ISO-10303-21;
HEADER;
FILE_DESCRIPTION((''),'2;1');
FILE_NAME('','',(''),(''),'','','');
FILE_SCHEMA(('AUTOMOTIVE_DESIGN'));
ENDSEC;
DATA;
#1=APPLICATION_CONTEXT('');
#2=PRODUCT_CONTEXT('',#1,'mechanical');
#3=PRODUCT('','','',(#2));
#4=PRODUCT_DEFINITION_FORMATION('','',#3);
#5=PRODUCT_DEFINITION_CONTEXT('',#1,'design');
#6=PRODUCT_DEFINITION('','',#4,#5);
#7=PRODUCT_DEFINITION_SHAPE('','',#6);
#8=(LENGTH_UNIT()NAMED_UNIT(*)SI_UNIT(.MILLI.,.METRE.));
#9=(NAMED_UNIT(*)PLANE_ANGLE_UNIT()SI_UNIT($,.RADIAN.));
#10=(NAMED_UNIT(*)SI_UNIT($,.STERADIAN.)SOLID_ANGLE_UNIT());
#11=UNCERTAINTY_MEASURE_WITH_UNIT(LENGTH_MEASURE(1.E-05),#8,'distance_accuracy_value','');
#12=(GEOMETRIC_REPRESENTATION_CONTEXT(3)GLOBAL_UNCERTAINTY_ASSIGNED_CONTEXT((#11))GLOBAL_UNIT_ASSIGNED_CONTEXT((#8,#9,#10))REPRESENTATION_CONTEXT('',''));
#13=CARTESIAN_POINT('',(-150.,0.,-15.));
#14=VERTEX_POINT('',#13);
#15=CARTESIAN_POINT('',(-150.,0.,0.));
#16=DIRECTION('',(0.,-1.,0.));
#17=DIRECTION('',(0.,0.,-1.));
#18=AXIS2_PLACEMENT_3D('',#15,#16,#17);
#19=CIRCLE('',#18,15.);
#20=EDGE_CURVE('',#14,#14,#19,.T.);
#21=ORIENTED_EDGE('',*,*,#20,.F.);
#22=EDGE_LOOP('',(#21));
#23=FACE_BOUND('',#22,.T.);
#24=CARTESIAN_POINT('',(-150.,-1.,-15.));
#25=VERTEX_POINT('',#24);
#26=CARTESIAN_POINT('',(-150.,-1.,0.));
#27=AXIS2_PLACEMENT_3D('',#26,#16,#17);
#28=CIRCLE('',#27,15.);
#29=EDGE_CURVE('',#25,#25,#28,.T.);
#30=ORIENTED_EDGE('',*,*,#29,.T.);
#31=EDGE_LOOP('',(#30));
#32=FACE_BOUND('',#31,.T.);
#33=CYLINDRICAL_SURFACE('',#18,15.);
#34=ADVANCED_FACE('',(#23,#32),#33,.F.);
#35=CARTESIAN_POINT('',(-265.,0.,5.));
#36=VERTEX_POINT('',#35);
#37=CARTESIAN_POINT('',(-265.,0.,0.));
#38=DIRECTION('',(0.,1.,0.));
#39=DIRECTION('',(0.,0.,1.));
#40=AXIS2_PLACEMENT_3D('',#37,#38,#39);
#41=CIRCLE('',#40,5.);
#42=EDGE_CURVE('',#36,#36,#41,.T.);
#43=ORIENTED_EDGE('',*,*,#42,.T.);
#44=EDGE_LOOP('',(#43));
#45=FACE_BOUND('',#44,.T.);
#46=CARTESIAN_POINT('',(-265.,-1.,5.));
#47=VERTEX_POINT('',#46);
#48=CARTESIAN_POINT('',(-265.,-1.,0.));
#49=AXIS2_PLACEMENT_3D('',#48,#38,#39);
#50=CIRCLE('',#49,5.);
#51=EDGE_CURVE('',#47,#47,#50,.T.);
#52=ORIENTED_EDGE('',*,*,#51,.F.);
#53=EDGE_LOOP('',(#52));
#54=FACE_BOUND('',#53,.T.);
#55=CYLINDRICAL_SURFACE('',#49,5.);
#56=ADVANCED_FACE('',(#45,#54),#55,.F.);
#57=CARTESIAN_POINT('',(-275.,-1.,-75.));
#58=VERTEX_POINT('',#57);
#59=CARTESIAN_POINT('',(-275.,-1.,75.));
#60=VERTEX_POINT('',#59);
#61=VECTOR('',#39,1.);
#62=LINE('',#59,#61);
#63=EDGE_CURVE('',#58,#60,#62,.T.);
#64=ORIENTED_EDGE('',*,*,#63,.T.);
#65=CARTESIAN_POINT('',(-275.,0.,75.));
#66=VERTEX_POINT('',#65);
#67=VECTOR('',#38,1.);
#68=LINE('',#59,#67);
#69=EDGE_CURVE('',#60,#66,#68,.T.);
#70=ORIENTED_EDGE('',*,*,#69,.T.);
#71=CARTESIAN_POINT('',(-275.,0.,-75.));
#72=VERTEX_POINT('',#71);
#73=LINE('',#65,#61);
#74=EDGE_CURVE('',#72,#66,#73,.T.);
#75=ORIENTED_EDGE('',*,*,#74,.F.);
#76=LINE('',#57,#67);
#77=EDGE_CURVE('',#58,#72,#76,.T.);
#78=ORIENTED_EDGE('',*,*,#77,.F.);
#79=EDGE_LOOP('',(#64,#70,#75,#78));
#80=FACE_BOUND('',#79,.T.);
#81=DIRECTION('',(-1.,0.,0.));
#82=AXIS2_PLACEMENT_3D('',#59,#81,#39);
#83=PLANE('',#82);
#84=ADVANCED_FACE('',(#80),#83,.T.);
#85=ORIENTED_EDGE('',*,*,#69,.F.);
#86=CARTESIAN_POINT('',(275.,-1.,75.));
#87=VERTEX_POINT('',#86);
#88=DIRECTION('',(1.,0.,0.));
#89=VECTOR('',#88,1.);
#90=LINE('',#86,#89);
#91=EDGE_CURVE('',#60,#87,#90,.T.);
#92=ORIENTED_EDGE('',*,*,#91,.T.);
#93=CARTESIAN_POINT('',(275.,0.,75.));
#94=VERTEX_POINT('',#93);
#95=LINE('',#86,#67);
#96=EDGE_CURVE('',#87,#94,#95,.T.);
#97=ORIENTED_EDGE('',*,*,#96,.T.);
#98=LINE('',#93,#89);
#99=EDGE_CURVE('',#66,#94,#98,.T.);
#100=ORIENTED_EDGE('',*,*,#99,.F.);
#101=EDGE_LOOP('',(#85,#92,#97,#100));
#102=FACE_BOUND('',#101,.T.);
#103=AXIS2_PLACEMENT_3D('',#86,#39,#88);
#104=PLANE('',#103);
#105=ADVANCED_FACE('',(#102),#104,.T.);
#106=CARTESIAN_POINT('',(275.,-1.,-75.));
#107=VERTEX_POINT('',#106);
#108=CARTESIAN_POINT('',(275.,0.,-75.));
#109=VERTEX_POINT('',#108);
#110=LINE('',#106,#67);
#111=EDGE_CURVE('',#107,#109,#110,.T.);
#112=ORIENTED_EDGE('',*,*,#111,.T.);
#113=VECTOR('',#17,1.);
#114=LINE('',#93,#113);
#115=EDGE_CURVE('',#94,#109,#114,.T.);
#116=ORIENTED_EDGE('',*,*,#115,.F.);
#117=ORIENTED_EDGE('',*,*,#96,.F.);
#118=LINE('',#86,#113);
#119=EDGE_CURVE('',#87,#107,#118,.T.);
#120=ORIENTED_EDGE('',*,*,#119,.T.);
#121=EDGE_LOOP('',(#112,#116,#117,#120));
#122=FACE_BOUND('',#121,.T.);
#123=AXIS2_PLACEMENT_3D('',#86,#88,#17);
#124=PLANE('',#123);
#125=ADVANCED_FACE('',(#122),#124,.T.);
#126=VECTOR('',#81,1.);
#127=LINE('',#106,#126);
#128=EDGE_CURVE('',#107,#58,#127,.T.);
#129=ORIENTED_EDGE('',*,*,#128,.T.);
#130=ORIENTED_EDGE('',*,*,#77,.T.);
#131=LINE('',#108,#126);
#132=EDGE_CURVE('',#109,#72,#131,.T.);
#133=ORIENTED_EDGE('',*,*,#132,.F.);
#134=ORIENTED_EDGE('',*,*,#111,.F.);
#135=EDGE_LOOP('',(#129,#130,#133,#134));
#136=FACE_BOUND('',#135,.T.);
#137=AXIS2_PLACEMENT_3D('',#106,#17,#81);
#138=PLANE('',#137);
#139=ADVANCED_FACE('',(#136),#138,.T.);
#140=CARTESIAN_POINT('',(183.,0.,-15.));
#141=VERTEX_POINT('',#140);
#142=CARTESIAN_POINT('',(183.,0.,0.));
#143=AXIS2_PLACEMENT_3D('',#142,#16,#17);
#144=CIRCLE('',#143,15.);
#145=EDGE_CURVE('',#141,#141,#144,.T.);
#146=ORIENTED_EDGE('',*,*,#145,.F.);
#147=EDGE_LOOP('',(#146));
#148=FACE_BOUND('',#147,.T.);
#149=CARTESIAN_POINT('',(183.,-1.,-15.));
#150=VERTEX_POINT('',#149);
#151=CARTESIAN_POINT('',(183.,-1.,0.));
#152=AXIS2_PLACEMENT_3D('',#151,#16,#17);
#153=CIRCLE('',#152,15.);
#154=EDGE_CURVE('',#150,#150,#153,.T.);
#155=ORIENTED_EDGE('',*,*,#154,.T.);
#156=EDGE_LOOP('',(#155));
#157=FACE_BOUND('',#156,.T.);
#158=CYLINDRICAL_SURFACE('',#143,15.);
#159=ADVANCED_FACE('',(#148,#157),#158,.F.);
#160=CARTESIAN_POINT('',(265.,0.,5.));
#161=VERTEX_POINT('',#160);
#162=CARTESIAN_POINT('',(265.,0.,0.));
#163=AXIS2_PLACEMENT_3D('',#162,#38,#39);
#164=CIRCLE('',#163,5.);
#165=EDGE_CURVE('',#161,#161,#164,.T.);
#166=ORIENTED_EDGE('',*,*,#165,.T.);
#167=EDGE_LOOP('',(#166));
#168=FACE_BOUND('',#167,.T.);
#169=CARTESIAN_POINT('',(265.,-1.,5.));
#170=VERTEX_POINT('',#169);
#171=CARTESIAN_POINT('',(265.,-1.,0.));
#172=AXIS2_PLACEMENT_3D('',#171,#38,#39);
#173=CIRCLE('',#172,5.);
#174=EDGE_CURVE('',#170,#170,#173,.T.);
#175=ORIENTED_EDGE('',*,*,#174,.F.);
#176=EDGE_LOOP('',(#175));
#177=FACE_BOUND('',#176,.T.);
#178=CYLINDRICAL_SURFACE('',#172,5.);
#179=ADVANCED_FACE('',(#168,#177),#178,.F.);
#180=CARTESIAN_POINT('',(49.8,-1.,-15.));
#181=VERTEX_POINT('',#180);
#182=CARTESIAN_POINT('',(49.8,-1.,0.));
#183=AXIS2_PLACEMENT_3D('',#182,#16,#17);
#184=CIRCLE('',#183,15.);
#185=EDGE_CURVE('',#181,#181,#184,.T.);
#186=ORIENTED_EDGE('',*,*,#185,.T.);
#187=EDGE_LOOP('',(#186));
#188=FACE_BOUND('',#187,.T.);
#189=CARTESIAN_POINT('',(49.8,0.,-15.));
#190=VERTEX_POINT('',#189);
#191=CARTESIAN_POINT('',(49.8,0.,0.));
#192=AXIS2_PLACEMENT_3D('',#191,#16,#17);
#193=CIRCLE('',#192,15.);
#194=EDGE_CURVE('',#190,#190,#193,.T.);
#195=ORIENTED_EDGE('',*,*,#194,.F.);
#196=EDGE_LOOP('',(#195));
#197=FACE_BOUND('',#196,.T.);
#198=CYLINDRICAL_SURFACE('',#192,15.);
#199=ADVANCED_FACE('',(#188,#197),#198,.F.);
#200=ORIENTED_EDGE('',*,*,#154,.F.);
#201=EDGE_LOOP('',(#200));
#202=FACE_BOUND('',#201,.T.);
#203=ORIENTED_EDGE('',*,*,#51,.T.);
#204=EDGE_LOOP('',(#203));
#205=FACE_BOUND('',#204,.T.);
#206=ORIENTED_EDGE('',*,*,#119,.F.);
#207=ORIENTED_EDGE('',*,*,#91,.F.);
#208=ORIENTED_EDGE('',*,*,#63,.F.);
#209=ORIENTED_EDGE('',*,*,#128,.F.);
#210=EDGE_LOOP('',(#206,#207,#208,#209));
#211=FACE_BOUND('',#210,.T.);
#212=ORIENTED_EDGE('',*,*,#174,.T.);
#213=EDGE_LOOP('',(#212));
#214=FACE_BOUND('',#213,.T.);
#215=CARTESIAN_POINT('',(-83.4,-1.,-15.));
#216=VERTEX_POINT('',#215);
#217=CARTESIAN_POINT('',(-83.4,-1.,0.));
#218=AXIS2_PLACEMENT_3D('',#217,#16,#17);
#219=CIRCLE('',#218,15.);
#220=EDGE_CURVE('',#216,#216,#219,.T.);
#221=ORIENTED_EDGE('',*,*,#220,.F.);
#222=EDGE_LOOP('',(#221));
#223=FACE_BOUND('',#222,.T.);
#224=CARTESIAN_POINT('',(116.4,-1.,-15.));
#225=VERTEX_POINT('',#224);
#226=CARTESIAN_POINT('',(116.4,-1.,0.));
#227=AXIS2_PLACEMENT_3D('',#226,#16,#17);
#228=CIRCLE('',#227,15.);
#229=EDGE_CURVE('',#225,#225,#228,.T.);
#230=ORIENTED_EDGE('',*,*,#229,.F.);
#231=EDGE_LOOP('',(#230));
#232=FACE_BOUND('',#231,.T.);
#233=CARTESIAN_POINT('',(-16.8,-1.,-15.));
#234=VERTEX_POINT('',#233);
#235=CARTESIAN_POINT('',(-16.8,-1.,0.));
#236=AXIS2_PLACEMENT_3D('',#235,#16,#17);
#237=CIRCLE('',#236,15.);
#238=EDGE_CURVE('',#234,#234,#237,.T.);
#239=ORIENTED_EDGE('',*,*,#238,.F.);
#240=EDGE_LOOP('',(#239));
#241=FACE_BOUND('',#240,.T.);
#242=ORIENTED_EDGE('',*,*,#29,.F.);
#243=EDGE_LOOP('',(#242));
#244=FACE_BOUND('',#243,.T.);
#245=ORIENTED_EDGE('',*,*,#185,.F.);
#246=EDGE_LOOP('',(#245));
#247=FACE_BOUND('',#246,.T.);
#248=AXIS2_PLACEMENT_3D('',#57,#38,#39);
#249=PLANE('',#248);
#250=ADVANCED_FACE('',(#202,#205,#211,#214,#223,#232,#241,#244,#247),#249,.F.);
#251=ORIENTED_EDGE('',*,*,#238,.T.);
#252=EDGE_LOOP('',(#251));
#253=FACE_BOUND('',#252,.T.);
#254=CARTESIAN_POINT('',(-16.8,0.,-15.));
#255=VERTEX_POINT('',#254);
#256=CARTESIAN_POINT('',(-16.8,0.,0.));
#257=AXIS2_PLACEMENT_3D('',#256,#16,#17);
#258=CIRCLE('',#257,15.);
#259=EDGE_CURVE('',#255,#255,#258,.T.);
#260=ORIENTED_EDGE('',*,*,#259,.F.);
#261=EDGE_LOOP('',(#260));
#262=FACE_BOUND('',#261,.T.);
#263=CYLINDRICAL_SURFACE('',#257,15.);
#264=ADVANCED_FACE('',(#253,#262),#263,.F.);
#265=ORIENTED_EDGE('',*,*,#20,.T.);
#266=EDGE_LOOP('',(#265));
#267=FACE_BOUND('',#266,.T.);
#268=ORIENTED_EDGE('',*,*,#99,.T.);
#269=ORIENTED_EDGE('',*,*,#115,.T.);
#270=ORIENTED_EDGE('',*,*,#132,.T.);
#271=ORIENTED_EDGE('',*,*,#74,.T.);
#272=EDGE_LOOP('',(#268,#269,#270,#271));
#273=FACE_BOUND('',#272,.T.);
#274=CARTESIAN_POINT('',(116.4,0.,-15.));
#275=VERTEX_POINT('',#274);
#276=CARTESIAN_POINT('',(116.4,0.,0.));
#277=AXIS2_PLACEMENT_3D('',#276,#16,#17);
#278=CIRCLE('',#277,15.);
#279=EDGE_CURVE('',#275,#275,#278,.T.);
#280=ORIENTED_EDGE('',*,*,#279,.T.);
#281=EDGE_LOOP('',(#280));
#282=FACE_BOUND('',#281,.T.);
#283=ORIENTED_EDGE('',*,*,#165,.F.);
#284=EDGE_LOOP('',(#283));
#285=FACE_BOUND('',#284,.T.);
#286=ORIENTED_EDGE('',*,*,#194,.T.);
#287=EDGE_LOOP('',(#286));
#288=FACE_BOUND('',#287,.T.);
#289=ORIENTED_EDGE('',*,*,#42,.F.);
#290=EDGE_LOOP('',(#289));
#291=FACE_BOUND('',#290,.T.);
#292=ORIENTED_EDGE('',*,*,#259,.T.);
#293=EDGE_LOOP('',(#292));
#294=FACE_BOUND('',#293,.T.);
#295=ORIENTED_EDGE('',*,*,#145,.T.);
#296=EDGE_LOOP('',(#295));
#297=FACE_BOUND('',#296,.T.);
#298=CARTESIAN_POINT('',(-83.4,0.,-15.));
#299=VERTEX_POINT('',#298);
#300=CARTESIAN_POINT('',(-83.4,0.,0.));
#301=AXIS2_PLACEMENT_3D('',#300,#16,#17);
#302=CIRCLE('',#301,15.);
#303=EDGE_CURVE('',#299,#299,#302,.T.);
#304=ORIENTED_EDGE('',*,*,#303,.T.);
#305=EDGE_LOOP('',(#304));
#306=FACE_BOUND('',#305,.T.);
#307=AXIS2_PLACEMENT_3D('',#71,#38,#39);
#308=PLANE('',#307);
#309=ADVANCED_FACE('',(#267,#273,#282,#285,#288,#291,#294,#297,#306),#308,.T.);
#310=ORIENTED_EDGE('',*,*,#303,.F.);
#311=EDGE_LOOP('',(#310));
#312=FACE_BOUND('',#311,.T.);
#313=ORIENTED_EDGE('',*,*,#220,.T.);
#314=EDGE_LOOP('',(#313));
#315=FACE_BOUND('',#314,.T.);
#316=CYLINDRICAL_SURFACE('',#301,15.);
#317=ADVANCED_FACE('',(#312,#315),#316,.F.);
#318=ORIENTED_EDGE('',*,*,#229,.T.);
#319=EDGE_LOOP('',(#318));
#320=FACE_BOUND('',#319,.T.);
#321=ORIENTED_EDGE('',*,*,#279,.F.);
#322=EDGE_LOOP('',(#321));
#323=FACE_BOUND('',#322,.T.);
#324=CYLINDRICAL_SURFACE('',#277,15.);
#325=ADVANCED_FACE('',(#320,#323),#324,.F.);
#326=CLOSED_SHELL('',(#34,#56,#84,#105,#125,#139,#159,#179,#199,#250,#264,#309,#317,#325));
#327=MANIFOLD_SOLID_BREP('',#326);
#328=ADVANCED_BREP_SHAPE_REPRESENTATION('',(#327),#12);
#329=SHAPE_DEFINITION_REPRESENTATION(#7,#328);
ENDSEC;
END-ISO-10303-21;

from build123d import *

# Parameters (mm, degrees)
SKETCH1_W          = 550
SKETCH1_H          = 150
BASE_FLANGE1_DEPTH = 1
SKETCH3_R          = 5
CUT_EXTRUDE1_DEPTH = 1
SKETCH4_R          = 15
CUT_EXTRUDE2_DEPTH = 1
LPATTERN1_COUNT    = 6
LPATTERN1_PITCH    = 66.6


# Sheet-metal steps are written as plain solids
with BuildPart() as part:
    # Sketch1 → Base-Flange1 (new body)
    with BuildSketch(Plane(origin=(0, 0, 0), x_dir=(1, 0, 0), z_dir=(0, 1, 0))):
        Rectangle(SKETCH1_W, SKETCH1_H)
    extrude(amount=-BASE_FLANGE1_DEPTH)

    # Sketch3 → Cut-Extrude1 (cut)
    with BuildSketch(Plane(origin=(0, 0, 0), x_dir=(1, 0, 0), z_dir=(0, 1, 0))):
        with Locations(Location((-265, 0, 0), (0, 0, 270))):
            Circle(SKETCH3_R)
        with Locations(Location((265, 0, 0), (0, 0, 270))):
            Circle(SKETCH3_R)
    extrude(amount=-CUT_EXTRUDE1_DEPTH, mode=Mode.SUBTRACT)

    # Sketch4 → Cut-Extrude2 (cut)
    with BuildSketch(Plane.XZ.offset(1)):
        with Locations(Location((-150, 0, 0), (0, 0, 270))):
            Circle(SKETCH4_R)
    cut_extrude2 = extrude(amount=-CUT_EXTRUDE2_DEPTH, mode=Mode.SUBTRACT)

    # LPattern1: Cut-Extrude2 ×6
    with Locations(*[(i * LPATTERN1_PITCH, 0, 0) for i in range(1, LPATTERN1_COUNT)]):
        add(cut_extrude2, mode=Mode.SUBTRACT)


solid = part.part
